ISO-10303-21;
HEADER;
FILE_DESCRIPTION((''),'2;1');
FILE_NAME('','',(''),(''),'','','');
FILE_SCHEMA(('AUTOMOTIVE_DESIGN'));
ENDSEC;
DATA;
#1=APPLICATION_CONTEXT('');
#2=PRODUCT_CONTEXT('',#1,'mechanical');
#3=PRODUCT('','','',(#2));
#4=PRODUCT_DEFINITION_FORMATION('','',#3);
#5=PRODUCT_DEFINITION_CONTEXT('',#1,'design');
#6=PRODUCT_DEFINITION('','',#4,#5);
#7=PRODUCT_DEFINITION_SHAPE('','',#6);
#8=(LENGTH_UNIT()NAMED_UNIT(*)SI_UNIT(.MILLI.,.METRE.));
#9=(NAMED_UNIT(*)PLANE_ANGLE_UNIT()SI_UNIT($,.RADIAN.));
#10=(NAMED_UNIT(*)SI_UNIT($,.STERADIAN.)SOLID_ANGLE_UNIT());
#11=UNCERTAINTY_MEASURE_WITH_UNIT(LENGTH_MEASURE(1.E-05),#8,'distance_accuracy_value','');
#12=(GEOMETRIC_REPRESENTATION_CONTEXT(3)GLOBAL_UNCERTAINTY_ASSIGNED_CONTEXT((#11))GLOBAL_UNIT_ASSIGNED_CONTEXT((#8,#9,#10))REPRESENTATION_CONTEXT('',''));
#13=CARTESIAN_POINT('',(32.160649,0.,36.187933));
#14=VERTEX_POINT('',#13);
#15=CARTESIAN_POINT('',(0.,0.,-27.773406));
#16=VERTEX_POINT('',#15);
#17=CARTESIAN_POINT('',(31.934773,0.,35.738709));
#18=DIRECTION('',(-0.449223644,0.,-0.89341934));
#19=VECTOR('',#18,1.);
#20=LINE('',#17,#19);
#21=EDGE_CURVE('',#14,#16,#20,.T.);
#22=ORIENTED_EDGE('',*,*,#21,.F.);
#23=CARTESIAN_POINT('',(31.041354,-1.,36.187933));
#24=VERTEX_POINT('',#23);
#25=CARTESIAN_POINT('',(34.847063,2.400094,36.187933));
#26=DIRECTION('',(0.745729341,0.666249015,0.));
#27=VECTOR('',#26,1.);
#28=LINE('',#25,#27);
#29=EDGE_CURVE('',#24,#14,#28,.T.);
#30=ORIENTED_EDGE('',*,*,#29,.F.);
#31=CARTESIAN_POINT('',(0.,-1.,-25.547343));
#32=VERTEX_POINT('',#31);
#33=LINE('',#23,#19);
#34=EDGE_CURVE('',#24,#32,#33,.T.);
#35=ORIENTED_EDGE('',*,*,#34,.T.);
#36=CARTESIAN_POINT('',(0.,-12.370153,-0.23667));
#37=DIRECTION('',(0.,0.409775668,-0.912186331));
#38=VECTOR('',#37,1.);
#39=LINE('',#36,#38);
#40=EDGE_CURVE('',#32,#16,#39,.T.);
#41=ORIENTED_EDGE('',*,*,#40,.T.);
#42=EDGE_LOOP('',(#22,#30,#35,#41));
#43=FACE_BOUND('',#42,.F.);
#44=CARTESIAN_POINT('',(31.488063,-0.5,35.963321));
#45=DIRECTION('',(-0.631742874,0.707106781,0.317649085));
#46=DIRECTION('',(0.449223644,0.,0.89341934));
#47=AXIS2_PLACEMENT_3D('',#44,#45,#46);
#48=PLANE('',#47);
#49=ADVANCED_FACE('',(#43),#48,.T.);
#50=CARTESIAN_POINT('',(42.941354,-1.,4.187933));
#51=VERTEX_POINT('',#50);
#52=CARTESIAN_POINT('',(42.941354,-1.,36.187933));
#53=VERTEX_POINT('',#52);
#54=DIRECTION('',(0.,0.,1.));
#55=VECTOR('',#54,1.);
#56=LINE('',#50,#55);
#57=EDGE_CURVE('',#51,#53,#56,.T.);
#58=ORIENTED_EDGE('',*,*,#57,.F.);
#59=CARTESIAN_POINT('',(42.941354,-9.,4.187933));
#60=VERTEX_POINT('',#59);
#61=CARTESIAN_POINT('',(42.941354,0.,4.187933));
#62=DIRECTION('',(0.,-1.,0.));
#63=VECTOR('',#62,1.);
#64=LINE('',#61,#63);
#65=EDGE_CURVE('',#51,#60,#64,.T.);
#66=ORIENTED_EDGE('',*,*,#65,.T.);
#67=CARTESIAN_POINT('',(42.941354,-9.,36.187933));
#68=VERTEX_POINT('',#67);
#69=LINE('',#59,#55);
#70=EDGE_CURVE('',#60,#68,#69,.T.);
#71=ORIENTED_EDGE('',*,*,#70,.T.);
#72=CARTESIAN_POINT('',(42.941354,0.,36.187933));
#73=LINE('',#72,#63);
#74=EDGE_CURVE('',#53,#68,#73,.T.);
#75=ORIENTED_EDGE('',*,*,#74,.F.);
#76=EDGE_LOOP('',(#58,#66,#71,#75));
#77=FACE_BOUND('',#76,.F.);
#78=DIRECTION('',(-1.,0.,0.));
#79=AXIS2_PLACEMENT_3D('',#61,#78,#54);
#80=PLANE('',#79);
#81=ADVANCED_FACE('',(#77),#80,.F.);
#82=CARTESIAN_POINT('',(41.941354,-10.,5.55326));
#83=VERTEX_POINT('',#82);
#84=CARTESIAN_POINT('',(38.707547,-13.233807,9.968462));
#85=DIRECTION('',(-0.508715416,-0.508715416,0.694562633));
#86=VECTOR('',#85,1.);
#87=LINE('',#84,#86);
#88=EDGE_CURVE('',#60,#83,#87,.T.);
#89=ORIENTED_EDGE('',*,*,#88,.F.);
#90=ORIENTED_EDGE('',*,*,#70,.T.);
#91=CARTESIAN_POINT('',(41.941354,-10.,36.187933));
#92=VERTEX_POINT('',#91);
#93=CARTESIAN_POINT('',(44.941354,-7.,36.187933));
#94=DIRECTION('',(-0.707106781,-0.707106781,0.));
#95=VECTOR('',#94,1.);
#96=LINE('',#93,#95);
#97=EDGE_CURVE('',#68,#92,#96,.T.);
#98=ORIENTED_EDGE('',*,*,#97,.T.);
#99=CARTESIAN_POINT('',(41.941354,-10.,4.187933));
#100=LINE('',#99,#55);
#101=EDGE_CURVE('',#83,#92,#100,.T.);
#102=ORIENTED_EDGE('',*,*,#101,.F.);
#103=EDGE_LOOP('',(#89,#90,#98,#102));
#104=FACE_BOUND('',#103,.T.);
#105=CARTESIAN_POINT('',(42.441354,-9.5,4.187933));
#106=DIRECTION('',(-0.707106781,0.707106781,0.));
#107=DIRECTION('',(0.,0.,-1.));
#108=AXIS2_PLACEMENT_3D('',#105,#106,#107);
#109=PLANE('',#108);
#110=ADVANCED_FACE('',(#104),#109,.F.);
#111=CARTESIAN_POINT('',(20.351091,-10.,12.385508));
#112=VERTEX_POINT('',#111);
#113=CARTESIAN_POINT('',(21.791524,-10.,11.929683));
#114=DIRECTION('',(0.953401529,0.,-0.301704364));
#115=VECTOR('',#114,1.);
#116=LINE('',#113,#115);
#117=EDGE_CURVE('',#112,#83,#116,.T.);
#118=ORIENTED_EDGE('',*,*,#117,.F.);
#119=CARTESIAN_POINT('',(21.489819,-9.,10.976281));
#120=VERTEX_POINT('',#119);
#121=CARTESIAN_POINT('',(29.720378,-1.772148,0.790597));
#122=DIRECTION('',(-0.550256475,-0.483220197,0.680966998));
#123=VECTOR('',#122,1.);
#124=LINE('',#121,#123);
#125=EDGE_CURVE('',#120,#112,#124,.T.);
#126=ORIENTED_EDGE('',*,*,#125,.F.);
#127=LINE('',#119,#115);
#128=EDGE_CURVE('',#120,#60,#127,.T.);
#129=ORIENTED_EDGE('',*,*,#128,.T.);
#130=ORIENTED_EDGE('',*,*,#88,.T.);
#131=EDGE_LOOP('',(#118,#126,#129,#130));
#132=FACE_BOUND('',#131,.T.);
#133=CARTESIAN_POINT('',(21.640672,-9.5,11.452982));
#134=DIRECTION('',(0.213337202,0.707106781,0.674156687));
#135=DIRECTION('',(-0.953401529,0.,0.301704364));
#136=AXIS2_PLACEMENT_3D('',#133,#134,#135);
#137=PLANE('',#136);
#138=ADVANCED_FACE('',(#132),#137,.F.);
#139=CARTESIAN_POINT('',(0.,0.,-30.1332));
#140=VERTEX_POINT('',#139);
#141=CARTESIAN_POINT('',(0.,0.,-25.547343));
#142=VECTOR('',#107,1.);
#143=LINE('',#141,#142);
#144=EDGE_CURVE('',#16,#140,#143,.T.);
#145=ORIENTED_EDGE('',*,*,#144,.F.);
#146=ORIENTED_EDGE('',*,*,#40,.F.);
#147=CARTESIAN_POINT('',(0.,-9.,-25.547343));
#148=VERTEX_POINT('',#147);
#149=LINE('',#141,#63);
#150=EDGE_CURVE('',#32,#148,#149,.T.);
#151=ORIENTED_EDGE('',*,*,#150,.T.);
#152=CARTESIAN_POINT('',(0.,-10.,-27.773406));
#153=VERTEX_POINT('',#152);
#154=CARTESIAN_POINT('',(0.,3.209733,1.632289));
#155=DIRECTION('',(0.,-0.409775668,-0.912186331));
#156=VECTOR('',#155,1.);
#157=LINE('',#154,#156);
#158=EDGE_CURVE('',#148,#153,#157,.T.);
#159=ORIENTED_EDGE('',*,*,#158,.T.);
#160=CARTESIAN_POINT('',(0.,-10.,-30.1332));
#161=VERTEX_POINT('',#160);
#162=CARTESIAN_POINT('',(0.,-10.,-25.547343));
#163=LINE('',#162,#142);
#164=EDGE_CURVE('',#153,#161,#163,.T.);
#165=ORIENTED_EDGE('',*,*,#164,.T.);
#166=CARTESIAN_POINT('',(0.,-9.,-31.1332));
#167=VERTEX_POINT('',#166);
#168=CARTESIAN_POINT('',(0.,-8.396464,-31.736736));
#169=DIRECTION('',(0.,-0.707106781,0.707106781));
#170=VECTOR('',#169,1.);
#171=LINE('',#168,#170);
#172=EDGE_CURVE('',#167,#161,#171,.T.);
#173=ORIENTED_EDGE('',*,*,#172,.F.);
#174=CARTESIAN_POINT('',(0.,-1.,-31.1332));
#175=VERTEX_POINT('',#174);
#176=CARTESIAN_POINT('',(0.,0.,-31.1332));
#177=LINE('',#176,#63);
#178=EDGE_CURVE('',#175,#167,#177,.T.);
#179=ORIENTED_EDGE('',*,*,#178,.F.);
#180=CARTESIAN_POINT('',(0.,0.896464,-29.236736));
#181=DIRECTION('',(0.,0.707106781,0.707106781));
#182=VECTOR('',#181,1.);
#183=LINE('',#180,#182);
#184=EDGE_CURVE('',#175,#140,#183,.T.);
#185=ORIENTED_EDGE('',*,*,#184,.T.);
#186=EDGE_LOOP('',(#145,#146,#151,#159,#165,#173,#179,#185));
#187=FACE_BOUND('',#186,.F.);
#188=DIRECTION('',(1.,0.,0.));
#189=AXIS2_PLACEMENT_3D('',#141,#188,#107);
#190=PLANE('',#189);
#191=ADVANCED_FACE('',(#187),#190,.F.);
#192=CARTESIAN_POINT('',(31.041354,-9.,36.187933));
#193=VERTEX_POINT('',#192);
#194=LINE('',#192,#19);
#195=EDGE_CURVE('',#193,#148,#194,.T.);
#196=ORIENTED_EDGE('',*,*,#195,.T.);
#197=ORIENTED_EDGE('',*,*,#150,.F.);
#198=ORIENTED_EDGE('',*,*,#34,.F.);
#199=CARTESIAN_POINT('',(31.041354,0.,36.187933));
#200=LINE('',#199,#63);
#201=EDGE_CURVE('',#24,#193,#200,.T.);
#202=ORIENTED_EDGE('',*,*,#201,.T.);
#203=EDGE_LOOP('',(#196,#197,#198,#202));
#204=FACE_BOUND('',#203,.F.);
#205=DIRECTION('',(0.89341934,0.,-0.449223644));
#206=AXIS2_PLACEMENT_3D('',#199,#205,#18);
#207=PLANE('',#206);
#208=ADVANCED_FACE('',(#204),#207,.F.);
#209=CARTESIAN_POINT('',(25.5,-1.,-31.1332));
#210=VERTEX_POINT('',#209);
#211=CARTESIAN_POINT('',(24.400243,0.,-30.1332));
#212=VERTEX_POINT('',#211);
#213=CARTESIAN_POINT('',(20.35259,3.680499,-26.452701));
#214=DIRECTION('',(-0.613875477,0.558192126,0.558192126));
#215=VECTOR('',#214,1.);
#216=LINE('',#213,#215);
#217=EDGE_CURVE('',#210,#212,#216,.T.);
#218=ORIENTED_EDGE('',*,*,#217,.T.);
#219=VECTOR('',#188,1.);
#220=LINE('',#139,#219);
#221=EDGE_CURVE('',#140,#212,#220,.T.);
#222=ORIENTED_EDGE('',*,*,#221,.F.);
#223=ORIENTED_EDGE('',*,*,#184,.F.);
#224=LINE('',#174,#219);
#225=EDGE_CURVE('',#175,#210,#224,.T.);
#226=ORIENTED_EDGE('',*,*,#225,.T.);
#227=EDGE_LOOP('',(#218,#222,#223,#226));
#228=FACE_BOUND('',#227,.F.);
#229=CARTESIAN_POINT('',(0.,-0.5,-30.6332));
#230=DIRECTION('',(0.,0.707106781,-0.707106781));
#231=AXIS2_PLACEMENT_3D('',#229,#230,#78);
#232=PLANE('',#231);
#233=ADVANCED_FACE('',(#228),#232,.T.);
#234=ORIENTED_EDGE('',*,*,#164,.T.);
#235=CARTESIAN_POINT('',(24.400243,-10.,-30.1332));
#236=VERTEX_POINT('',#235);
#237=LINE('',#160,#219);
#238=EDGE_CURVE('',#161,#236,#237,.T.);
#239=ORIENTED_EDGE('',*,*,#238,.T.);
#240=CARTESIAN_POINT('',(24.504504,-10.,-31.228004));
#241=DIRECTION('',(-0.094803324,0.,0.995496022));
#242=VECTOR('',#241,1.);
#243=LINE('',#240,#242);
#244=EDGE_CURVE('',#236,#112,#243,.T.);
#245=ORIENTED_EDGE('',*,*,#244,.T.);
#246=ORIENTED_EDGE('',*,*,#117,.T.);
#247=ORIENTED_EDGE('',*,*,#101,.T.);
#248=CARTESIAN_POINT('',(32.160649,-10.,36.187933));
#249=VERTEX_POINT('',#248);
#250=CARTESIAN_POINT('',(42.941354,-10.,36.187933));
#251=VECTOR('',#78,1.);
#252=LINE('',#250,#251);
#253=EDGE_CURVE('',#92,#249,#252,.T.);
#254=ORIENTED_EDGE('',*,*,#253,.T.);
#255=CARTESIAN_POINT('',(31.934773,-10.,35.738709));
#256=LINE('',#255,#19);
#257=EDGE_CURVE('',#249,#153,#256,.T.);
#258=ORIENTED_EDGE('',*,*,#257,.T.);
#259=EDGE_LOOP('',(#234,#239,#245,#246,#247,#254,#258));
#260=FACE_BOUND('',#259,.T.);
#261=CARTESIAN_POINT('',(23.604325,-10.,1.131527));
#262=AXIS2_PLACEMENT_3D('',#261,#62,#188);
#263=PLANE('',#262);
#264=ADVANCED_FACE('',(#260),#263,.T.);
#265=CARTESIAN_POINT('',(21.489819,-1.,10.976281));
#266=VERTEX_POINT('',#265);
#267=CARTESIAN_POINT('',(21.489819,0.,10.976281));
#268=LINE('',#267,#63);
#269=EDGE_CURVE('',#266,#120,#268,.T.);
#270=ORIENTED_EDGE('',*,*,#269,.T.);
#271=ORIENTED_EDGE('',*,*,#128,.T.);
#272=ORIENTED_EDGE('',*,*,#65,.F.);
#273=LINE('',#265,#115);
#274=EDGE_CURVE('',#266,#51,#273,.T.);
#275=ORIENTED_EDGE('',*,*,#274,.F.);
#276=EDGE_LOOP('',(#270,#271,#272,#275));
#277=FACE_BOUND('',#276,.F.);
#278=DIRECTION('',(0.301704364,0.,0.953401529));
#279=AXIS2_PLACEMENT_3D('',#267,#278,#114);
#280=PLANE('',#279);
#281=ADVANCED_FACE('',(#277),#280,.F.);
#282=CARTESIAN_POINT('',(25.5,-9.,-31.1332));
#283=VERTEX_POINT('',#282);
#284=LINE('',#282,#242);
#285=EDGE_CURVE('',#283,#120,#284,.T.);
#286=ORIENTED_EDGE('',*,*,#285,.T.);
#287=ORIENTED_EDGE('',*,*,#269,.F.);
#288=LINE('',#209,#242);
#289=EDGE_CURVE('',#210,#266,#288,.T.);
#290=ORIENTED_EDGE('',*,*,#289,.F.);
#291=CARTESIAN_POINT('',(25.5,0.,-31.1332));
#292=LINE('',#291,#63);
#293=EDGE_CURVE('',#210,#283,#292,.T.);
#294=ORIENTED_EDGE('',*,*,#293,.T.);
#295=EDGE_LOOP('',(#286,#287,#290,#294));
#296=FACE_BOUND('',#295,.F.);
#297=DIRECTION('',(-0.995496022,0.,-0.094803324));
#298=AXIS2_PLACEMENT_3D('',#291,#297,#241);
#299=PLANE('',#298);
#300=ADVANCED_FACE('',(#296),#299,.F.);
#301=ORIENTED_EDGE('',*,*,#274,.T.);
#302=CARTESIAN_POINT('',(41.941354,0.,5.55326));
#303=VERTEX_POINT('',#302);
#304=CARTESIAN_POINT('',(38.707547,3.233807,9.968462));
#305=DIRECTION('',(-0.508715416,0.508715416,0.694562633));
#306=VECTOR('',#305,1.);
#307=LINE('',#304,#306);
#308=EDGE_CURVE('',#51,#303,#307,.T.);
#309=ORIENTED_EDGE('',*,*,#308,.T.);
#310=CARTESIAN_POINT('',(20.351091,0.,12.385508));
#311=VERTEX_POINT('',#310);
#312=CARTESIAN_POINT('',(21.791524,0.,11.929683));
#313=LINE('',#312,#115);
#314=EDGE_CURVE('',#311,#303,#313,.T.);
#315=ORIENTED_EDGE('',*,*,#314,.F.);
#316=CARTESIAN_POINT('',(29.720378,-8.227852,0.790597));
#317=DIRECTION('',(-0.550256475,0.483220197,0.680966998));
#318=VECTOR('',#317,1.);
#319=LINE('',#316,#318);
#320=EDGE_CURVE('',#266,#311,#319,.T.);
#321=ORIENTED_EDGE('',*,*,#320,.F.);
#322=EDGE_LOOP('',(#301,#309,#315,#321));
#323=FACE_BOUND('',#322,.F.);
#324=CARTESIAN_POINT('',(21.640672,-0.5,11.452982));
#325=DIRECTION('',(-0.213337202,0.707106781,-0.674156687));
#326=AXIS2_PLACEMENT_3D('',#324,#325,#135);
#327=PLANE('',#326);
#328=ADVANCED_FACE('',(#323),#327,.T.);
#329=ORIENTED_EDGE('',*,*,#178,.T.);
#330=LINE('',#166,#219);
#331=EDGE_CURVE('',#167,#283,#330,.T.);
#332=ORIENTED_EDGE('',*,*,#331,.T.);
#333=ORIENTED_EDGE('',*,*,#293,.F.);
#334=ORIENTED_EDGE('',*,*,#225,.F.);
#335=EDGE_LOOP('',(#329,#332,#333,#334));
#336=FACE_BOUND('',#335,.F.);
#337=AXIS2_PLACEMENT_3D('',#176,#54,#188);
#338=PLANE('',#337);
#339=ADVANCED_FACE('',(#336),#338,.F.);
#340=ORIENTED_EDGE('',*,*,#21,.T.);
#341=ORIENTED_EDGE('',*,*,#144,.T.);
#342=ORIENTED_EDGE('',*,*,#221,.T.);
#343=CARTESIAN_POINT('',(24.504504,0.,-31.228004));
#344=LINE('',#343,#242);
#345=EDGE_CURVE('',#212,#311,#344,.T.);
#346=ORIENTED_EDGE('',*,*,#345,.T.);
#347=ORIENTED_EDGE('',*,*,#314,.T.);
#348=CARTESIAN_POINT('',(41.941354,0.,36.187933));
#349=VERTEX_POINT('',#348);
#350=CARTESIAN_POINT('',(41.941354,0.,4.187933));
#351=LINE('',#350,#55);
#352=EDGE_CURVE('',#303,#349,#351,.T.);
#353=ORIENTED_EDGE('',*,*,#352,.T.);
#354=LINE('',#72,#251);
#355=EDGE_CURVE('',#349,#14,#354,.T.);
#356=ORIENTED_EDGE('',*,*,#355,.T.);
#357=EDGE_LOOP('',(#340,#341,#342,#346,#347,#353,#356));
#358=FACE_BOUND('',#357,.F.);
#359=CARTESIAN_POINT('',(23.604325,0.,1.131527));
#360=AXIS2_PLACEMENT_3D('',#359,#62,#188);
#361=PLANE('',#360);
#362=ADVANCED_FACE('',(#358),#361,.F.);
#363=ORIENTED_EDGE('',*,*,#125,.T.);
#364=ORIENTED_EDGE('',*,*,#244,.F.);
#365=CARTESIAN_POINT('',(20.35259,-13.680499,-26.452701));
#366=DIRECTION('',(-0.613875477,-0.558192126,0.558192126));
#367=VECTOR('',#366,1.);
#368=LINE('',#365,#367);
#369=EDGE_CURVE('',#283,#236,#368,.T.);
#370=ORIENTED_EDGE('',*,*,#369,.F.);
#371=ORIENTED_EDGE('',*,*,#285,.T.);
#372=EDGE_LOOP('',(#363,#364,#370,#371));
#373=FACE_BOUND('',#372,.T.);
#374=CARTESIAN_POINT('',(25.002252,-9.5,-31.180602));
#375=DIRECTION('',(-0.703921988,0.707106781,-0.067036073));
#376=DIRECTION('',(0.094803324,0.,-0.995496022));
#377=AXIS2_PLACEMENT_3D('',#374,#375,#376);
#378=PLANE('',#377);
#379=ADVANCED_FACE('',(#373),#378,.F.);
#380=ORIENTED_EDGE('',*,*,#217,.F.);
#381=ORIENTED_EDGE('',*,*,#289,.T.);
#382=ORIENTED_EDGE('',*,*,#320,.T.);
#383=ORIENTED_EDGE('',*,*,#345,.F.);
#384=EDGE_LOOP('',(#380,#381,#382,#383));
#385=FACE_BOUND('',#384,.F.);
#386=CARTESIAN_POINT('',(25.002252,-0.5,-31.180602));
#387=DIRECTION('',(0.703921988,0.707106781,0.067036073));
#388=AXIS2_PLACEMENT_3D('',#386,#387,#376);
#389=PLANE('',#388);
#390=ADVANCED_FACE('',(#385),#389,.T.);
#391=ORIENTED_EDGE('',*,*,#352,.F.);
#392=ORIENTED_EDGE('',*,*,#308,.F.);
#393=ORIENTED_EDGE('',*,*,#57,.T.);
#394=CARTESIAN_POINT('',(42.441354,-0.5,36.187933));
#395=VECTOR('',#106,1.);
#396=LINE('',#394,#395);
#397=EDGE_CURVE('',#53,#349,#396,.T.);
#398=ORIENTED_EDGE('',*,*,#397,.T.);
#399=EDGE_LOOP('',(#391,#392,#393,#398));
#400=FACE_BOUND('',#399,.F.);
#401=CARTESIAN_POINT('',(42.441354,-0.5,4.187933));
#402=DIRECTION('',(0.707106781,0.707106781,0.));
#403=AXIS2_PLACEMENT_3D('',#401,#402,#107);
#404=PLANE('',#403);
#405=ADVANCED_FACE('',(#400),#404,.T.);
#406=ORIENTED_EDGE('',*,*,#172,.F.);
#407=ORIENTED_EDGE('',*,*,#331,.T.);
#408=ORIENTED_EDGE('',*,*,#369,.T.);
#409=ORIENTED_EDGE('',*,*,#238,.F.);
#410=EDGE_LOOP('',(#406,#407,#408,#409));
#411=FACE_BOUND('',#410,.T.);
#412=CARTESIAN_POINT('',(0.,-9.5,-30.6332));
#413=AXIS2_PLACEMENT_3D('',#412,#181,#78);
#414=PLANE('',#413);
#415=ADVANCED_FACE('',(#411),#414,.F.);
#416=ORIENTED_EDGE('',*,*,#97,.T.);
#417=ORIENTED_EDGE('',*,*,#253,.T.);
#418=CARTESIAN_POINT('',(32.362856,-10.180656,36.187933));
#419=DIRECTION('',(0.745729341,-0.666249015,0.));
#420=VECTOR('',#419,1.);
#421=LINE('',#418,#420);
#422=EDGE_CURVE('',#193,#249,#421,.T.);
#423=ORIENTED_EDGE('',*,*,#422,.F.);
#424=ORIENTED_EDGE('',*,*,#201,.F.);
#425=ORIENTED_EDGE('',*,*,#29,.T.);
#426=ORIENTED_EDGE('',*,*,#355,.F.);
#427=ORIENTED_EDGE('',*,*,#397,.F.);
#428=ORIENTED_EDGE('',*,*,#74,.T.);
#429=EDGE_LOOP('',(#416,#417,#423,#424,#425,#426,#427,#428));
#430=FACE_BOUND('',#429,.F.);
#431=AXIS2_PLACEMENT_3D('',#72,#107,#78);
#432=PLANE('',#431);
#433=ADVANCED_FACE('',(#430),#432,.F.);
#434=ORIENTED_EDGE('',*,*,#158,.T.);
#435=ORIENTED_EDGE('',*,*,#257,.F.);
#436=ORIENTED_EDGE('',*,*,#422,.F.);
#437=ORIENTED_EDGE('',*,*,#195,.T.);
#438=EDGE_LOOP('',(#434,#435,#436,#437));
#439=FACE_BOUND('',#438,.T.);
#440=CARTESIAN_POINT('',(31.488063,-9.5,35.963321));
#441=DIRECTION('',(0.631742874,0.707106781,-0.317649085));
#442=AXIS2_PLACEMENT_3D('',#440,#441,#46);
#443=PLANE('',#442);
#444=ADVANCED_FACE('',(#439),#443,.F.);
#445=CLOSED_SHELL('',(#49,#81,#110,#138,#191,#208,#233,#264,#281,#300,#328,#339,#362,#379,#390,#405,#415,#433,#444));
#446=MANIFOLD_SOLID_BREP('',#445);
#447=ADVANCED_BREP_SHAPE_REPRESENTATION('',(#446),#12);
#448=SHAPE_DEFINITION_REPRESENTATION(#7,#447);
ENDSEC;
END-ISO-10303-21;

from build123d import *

# Parameters (mm, degrees)
F1_DEPTH = 10
F4_SIZE  = 1


# Not quite as in the source:
# - a feature of the source that left no trace in its solid (it failed there, or was rolled back) is left out


with BuildPart() as f1:
    # F0 (on Front) → F1 (new body)
    with BuildSketch(Plane.XZ):
        Polygon((0, -25.5473433032), (0, -31.1332004264), (25.5, -31.1332004264), (21.4898194077, 10.9762813041), (42.9413538213, 4.1879331029), (42.9413538213, 36.1879331029), (31.0413538213, 36.1879331029), align=None)
    extrude(amount=F1_DEPTH)

    # F4
    f4_edges = [f1.edges().sort_by_distance(p)[0] for p in [
        (23.49491, 0, -10.07846),
        (32.215587, 0, 7.582107),
        (42.941354, 0, 20.187933),
        (15.520677, 0, 5.320295),
        (23.49491, -10, -10.07846),
        (32.215587, -10, 7.582107),
        (42.941354, -10, 20.187933),
        (15.520677, -10, 5.320295),
        (12.75, 0, -31.1332),
        (12.75, -10, -31.1332),
    ]]
    chamfer(f4_edges, length=F4_SIZE)


solid = f1.part
